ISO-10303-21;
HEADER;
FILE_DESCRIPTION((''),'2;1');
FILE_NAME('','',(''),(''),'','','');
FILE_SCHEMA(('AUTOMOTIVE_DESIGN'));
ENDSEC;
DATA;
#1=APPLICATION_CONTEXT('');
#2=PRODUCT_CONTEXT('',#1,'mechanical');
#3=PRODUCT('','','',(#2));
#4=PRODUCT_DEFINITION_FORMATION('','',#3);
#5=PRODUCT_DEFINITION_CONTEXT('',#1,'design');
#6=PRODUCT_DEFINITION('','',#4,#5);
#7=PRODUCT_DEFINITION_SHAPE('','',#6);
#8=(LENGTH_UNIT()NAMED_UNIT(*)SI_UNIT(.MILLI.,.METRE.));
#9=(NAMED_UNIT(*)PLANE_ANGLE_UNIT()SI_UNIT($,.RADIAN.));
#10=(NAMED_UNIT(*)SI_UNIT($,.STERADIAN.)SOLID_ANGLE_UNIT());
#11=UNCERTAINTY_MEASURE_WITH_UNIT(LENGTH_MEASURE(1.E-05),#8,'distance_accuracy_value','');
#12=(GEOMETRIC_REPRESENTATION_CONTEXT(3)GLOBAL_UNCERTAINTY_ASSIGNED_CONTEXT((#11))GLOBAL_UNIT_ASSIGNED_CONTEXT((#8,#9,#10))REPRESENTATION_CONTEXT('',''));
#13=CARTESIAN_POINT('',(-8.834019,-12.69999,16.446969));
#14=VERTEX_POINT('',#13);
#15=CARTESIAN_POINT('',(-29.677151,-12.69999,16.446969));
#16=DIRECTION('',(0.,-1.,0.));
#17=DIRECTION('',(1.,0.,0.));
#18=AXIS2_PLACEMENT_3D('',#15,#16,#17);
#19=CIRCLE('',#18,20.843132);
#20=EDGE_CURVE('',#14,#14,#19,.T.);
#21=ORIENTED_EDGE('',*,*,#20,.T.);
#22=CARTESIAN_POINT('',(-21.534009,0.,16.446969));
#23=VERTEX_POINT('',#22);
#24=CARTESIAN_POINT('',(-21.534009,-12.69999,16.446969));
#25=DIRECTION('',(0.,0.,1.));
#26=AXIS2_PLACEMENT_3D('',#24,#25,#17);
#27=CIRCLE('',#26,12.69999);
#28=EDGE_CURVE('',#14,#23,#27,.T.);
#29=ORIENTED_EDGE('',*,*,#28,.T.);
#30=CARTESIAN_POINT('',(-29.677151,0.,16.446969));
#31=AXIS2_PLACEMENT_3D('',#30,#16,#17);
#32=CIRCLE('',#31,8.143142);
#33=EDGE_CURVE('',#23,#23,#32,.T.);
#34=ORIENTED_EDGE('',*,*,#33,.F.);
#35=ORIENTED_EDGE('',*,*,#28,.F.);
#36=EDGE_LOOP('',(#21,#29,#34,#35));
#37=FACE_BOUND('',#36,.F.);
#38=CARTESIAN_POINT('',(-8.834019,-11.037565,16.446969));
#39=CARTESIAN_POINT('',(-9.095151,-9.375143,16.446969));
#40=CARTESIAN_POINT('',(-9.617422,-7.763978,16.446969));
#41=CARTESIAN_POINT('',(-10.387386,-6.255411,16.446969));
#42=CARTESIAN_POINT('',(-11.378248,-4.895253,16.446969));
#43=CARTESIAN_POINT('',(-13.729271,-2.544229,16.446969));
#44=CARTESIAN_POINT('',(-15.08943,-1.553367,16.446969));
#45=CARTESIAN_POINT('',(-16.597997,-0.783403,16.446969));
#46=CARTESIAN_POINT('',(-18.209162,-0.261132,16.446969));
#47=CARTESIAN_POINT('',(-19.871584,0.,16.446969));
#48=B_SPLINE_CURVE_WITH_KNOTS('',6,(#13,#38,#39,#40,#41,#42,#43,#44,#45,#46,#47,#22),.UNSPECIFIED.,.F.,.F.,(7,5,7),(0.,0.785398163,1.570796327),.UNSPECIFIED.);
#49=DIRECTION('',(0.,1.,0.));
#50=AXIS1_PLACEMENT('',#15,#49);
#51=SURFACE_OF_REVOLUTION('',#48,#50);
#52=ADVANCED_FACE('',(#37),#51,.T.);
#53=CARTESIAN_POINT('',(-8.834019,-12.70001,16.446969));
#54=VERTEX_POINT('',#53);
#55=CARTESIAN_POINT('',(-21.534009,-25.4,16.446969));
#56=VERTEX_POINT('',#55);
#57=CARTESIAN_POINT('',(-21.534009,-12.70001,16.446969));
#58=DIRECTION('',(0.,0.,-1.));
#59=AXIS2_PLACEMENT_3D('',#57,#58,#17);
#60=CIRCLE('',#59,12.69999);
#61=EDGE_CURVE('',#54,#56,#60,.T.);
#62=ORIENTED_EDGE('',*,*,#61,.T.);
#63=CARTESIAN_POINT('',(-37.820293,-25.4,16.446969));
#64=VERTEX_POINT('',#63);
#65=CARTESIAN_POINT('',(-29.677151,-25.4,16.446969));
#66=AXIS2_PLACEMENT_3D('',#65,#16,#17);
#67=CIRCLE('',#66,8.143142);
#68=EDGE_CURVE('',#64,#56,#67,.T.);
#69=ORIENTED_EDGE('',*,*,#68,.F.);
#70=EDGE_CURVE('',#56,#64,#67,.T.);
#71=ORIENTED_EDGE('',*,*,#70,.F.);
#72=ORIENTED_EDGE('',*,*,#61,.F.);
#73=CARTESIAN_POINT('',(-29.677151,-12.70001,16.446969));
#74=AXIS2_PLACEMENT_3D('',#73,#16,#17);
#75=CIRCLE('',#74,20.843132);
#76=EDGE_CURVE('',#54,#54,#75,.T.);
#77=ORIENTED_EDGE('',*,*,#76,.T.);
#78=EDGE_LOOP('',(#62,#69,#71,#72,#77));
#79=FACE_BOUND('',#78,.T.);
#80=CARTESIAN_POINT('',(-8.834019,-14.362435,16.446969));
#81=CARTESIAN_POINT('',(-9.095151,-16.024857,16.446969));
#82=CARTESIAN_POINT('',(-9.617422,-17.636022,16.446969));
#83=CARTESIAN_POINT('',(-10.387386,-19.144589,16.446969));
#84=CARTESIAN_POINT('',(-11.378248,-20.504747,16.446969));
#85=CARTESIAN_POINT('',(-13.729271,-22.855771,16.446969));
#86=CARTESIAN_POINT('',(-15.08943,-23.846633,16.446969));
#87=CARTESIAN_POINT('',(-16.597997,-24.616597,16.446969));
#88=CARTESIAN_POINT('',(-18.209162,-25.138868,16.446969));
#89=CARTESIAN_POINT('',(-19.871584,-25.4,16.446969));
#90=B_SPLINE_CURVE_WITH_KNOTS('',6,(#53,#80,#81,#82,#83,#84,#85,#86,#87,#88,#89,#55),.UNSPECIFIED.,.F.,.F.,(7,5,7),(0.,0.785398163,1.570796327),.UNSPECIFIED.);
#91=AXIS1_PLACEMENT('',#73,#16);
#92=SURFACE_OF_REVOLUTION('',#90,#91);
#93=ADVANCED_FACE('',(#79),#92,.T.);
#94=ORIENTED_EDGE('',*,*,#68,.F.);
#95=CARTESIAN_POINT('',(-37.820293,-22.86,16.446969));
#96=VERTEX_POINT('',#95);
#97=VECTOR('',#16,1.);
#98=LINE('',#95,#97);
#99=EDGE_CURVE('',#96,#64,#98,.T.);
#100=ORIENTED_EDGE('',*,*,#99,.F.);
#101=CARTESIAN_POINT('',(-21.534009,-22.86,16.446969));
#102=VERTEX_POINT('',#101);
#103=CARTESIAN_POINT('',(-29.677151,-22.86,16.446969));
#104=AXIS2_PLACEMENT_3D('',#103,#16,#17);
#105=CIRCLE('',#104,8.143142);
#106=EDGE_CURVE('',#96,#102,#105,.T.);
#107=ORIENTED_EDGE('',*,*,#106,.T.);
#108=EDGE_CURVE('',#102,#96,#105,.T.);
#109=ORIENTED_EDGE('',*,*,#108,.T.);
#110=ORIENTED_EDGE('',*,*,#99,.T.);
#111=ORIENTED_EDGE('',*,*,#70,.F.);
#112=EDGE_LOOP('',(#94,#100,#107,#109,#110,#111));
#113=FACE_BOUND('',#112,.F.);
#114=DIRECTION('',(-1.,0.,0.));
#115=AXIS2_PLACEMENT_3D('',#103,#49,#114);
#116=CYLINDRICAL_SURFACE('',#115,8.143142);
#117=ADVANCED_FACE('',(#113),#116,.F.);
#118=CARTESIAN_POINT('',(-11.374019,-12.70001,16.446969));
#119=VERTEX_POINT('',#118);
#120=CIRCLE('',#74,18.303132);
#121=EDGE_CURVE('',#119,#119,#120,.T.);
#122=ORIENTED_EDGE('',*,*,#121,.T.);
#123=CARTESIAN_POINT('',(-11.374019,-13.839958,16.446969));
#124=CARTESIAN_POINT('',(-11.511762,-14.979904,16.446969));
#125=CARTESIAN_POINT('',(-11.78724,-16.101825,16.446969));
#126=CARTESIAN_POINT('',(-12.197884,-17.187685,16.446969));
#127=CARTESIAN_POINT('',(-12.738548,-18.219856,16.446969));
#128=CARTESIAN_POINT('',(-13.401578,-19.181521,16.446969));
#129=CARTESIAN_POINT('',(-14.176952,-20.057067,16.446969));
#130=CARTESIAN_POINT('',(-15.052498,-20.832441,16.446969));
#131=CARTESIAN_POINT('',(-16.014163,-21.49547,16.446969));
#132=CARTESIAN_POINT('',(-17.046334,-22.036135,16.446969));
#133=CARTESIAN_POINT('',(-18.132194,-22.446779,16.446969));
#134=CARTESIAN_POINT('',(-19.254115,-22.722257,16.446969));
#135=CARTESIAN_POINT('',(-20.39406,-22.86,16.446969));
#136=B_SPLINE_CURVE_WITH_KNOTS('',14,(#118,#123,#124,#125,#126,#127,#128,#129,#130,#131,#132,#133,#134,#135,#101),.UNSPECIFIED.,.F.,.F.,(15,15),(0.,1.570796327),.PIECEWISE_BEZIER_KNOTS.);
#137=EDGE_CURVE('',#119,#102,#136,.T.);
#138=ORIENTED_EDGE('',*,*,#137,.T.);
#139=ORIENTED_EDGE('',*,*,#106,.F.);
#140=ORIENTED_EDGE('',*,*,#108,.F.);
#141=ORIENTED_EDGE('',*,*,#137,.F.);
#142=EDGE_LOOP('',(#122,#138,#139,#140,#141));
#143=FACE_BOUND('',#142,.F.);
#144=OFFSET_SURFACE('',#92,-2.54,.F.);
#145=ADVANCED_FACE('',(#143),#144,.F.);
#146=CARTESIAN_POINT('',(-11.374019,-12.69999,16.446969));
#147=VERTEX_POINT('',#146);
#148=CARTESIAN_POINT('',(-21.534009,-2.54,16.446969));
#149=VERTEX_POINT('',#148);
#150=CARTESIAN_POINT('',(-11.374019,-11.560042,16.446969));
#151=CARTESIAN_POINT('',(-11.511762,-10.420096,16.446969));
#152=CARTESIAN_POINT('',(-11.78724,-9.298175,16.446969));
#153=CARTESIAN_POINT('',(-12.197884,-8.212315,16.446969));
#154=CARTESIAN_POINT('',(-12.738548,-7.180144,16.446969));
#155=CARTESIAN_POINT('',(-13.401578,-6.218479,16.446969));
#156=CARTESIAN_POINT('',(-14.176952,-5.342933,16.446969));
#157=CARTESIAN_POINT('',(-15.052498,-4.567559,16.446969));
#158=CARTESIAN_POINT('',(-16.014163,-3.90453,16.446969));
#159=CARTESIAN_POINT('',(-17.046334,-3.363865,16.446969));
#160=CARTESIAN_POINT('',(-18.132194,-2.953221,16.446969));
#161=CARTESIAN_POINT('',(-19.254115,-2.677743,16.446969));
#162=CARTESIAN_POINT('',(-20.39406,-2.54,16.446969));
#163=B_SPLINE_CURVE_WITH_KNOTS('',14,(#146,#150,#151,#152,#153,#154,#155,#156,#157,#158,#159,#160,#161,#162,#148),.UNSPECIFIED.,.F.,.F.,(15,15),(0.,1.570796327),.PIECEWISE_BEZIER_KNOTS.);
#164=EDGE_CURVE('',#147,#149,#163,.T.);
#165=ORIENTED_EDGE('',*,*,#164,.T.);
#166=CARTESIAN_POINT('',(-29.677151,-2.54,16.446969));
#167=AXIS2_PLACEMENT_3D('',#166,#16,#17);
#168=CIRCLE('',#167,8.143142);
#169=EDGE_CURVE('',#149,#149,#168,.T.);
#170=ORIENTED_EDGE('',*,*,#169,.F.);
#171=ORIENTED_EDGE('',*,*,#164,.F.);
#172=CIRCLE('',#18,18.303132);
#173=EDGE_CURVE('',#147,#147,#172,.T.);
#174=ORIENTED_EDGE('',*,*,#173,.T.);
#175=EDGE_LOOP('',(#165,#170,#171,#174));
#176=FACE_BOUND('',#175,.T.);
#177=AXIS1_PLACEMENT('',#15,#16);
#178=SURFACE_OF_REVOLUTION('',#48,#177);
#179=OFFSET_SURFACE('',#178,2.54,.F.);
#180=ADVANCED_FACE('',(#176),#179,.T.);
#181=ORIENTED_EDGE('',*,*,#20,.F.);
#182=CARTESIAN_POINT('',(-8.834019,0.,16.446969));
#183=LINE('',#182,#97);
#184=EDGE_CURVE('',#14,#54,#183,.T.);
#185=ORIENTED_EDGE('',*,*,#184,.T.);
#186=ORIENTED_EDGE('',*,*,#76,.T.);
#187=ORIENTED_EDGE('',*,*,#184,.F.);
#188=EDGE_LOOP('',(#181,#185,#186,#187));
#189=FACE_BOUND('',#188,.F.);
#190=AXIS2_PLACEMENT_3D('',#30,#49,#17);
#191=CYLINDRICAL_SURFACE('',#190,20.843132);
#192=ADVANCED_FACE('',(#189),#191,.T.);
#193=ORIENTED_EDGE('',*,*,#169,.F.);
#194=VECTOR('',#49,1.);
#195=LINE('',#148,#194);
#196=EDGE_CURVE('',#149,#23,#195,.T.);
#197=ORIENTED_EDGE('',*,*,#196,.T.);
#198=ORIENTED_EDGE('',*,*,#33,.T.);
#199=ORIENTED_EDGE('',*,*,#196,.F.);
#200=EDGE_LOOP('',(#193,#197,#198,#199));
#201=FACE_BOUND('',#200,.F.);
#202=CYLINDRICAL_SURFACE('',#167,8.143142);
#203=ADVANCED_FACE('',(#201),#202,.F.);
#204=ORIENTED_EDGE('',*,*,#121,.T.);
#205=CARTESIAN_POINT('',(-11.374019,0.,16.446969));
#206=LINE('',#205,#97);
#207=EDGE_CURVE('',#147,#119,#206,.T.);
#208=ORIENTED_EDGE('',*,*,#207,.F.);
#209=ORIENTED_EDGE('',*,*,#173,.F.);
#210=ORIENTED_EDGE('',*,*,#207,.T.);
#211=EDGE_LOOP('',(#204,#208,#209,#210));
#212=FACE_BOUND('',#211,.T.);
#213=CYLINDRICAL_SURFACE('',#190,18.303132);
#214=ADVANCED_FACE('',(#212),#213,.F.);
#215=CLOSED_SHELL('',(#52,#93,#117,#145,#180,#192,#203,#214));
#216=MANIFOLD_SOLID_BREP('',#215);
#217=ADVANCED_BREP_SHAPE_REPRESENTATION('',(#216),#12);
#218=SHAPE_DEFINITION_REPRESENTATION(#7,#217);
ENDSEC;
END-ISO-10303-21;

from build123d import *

# Parameters (mm, degrees)
F0_R     = 20.8431321475
F1_DEPTH = 25.4
F2_R     = 12.69999
F3_T     = -2.54
F4_R     = 8.1431421475
F5_DEPTH = 25.4


# Not quite as in the source:
# - a fillet or chamfer is up to 0.001 mm smaller than in the source, because OpenCascade refuses the exact size


with BuildPart() as f1:
    # F0 (on Front) → F1 (new body)
    with BuildSketch(Plane.XZ):
        with Locations((-29.677150771, 16.4469685405)):
            Circle(F0_R)
    extrude(amount=F1_DEPTH)

    # F2 (radius 12.7 in the source; OpenCascade refuses exactly that, so slightly less here)
    f2_edges = [f1.edges().sort_by_distance(p)[0] for p in [
        (-50.520283, -25.4, 16.446969),
        (-8.834019, -12.7, 16.446969),
        (-50.520283, 0, 16.446969),
    ]]
    fillet(f2_edges, radius=F2_R)

    # F3: a shell. OpenCascade refuses it in one call, so the cavity is built on its own and cut out:
    # the body offset inwards by the wall thickness, plus a prism from it out through each open face.
    f3_core = offset(f1.part, amount=F3_T, mode=Mode.PRIVATE)
    f3_exits = [f3_core.faces().sort_by_distance(p)[0] for p in [
        (-29.677151, -2.54, 16.446969),
    ]]
    add(f3_core, mode=Mode.SUBTRACT)
    extrude(f3_exits, amount=-F3_T, mode=Mode.SUBTRACT)

    # F4 (on face) → F5 (cut)
    with BuildSketch(Plane(origin=(0, -22.86, 0), x_dir=(-1, 0, 0), z_dir=(0, 1, 0))):
        with Locations((29.677150771, 16.4469685405)):
            Circle(F4_R)
    extrude(amount=-F5_DEPTH, mode=Mode.SUBTRACT)


solid = f1.part
